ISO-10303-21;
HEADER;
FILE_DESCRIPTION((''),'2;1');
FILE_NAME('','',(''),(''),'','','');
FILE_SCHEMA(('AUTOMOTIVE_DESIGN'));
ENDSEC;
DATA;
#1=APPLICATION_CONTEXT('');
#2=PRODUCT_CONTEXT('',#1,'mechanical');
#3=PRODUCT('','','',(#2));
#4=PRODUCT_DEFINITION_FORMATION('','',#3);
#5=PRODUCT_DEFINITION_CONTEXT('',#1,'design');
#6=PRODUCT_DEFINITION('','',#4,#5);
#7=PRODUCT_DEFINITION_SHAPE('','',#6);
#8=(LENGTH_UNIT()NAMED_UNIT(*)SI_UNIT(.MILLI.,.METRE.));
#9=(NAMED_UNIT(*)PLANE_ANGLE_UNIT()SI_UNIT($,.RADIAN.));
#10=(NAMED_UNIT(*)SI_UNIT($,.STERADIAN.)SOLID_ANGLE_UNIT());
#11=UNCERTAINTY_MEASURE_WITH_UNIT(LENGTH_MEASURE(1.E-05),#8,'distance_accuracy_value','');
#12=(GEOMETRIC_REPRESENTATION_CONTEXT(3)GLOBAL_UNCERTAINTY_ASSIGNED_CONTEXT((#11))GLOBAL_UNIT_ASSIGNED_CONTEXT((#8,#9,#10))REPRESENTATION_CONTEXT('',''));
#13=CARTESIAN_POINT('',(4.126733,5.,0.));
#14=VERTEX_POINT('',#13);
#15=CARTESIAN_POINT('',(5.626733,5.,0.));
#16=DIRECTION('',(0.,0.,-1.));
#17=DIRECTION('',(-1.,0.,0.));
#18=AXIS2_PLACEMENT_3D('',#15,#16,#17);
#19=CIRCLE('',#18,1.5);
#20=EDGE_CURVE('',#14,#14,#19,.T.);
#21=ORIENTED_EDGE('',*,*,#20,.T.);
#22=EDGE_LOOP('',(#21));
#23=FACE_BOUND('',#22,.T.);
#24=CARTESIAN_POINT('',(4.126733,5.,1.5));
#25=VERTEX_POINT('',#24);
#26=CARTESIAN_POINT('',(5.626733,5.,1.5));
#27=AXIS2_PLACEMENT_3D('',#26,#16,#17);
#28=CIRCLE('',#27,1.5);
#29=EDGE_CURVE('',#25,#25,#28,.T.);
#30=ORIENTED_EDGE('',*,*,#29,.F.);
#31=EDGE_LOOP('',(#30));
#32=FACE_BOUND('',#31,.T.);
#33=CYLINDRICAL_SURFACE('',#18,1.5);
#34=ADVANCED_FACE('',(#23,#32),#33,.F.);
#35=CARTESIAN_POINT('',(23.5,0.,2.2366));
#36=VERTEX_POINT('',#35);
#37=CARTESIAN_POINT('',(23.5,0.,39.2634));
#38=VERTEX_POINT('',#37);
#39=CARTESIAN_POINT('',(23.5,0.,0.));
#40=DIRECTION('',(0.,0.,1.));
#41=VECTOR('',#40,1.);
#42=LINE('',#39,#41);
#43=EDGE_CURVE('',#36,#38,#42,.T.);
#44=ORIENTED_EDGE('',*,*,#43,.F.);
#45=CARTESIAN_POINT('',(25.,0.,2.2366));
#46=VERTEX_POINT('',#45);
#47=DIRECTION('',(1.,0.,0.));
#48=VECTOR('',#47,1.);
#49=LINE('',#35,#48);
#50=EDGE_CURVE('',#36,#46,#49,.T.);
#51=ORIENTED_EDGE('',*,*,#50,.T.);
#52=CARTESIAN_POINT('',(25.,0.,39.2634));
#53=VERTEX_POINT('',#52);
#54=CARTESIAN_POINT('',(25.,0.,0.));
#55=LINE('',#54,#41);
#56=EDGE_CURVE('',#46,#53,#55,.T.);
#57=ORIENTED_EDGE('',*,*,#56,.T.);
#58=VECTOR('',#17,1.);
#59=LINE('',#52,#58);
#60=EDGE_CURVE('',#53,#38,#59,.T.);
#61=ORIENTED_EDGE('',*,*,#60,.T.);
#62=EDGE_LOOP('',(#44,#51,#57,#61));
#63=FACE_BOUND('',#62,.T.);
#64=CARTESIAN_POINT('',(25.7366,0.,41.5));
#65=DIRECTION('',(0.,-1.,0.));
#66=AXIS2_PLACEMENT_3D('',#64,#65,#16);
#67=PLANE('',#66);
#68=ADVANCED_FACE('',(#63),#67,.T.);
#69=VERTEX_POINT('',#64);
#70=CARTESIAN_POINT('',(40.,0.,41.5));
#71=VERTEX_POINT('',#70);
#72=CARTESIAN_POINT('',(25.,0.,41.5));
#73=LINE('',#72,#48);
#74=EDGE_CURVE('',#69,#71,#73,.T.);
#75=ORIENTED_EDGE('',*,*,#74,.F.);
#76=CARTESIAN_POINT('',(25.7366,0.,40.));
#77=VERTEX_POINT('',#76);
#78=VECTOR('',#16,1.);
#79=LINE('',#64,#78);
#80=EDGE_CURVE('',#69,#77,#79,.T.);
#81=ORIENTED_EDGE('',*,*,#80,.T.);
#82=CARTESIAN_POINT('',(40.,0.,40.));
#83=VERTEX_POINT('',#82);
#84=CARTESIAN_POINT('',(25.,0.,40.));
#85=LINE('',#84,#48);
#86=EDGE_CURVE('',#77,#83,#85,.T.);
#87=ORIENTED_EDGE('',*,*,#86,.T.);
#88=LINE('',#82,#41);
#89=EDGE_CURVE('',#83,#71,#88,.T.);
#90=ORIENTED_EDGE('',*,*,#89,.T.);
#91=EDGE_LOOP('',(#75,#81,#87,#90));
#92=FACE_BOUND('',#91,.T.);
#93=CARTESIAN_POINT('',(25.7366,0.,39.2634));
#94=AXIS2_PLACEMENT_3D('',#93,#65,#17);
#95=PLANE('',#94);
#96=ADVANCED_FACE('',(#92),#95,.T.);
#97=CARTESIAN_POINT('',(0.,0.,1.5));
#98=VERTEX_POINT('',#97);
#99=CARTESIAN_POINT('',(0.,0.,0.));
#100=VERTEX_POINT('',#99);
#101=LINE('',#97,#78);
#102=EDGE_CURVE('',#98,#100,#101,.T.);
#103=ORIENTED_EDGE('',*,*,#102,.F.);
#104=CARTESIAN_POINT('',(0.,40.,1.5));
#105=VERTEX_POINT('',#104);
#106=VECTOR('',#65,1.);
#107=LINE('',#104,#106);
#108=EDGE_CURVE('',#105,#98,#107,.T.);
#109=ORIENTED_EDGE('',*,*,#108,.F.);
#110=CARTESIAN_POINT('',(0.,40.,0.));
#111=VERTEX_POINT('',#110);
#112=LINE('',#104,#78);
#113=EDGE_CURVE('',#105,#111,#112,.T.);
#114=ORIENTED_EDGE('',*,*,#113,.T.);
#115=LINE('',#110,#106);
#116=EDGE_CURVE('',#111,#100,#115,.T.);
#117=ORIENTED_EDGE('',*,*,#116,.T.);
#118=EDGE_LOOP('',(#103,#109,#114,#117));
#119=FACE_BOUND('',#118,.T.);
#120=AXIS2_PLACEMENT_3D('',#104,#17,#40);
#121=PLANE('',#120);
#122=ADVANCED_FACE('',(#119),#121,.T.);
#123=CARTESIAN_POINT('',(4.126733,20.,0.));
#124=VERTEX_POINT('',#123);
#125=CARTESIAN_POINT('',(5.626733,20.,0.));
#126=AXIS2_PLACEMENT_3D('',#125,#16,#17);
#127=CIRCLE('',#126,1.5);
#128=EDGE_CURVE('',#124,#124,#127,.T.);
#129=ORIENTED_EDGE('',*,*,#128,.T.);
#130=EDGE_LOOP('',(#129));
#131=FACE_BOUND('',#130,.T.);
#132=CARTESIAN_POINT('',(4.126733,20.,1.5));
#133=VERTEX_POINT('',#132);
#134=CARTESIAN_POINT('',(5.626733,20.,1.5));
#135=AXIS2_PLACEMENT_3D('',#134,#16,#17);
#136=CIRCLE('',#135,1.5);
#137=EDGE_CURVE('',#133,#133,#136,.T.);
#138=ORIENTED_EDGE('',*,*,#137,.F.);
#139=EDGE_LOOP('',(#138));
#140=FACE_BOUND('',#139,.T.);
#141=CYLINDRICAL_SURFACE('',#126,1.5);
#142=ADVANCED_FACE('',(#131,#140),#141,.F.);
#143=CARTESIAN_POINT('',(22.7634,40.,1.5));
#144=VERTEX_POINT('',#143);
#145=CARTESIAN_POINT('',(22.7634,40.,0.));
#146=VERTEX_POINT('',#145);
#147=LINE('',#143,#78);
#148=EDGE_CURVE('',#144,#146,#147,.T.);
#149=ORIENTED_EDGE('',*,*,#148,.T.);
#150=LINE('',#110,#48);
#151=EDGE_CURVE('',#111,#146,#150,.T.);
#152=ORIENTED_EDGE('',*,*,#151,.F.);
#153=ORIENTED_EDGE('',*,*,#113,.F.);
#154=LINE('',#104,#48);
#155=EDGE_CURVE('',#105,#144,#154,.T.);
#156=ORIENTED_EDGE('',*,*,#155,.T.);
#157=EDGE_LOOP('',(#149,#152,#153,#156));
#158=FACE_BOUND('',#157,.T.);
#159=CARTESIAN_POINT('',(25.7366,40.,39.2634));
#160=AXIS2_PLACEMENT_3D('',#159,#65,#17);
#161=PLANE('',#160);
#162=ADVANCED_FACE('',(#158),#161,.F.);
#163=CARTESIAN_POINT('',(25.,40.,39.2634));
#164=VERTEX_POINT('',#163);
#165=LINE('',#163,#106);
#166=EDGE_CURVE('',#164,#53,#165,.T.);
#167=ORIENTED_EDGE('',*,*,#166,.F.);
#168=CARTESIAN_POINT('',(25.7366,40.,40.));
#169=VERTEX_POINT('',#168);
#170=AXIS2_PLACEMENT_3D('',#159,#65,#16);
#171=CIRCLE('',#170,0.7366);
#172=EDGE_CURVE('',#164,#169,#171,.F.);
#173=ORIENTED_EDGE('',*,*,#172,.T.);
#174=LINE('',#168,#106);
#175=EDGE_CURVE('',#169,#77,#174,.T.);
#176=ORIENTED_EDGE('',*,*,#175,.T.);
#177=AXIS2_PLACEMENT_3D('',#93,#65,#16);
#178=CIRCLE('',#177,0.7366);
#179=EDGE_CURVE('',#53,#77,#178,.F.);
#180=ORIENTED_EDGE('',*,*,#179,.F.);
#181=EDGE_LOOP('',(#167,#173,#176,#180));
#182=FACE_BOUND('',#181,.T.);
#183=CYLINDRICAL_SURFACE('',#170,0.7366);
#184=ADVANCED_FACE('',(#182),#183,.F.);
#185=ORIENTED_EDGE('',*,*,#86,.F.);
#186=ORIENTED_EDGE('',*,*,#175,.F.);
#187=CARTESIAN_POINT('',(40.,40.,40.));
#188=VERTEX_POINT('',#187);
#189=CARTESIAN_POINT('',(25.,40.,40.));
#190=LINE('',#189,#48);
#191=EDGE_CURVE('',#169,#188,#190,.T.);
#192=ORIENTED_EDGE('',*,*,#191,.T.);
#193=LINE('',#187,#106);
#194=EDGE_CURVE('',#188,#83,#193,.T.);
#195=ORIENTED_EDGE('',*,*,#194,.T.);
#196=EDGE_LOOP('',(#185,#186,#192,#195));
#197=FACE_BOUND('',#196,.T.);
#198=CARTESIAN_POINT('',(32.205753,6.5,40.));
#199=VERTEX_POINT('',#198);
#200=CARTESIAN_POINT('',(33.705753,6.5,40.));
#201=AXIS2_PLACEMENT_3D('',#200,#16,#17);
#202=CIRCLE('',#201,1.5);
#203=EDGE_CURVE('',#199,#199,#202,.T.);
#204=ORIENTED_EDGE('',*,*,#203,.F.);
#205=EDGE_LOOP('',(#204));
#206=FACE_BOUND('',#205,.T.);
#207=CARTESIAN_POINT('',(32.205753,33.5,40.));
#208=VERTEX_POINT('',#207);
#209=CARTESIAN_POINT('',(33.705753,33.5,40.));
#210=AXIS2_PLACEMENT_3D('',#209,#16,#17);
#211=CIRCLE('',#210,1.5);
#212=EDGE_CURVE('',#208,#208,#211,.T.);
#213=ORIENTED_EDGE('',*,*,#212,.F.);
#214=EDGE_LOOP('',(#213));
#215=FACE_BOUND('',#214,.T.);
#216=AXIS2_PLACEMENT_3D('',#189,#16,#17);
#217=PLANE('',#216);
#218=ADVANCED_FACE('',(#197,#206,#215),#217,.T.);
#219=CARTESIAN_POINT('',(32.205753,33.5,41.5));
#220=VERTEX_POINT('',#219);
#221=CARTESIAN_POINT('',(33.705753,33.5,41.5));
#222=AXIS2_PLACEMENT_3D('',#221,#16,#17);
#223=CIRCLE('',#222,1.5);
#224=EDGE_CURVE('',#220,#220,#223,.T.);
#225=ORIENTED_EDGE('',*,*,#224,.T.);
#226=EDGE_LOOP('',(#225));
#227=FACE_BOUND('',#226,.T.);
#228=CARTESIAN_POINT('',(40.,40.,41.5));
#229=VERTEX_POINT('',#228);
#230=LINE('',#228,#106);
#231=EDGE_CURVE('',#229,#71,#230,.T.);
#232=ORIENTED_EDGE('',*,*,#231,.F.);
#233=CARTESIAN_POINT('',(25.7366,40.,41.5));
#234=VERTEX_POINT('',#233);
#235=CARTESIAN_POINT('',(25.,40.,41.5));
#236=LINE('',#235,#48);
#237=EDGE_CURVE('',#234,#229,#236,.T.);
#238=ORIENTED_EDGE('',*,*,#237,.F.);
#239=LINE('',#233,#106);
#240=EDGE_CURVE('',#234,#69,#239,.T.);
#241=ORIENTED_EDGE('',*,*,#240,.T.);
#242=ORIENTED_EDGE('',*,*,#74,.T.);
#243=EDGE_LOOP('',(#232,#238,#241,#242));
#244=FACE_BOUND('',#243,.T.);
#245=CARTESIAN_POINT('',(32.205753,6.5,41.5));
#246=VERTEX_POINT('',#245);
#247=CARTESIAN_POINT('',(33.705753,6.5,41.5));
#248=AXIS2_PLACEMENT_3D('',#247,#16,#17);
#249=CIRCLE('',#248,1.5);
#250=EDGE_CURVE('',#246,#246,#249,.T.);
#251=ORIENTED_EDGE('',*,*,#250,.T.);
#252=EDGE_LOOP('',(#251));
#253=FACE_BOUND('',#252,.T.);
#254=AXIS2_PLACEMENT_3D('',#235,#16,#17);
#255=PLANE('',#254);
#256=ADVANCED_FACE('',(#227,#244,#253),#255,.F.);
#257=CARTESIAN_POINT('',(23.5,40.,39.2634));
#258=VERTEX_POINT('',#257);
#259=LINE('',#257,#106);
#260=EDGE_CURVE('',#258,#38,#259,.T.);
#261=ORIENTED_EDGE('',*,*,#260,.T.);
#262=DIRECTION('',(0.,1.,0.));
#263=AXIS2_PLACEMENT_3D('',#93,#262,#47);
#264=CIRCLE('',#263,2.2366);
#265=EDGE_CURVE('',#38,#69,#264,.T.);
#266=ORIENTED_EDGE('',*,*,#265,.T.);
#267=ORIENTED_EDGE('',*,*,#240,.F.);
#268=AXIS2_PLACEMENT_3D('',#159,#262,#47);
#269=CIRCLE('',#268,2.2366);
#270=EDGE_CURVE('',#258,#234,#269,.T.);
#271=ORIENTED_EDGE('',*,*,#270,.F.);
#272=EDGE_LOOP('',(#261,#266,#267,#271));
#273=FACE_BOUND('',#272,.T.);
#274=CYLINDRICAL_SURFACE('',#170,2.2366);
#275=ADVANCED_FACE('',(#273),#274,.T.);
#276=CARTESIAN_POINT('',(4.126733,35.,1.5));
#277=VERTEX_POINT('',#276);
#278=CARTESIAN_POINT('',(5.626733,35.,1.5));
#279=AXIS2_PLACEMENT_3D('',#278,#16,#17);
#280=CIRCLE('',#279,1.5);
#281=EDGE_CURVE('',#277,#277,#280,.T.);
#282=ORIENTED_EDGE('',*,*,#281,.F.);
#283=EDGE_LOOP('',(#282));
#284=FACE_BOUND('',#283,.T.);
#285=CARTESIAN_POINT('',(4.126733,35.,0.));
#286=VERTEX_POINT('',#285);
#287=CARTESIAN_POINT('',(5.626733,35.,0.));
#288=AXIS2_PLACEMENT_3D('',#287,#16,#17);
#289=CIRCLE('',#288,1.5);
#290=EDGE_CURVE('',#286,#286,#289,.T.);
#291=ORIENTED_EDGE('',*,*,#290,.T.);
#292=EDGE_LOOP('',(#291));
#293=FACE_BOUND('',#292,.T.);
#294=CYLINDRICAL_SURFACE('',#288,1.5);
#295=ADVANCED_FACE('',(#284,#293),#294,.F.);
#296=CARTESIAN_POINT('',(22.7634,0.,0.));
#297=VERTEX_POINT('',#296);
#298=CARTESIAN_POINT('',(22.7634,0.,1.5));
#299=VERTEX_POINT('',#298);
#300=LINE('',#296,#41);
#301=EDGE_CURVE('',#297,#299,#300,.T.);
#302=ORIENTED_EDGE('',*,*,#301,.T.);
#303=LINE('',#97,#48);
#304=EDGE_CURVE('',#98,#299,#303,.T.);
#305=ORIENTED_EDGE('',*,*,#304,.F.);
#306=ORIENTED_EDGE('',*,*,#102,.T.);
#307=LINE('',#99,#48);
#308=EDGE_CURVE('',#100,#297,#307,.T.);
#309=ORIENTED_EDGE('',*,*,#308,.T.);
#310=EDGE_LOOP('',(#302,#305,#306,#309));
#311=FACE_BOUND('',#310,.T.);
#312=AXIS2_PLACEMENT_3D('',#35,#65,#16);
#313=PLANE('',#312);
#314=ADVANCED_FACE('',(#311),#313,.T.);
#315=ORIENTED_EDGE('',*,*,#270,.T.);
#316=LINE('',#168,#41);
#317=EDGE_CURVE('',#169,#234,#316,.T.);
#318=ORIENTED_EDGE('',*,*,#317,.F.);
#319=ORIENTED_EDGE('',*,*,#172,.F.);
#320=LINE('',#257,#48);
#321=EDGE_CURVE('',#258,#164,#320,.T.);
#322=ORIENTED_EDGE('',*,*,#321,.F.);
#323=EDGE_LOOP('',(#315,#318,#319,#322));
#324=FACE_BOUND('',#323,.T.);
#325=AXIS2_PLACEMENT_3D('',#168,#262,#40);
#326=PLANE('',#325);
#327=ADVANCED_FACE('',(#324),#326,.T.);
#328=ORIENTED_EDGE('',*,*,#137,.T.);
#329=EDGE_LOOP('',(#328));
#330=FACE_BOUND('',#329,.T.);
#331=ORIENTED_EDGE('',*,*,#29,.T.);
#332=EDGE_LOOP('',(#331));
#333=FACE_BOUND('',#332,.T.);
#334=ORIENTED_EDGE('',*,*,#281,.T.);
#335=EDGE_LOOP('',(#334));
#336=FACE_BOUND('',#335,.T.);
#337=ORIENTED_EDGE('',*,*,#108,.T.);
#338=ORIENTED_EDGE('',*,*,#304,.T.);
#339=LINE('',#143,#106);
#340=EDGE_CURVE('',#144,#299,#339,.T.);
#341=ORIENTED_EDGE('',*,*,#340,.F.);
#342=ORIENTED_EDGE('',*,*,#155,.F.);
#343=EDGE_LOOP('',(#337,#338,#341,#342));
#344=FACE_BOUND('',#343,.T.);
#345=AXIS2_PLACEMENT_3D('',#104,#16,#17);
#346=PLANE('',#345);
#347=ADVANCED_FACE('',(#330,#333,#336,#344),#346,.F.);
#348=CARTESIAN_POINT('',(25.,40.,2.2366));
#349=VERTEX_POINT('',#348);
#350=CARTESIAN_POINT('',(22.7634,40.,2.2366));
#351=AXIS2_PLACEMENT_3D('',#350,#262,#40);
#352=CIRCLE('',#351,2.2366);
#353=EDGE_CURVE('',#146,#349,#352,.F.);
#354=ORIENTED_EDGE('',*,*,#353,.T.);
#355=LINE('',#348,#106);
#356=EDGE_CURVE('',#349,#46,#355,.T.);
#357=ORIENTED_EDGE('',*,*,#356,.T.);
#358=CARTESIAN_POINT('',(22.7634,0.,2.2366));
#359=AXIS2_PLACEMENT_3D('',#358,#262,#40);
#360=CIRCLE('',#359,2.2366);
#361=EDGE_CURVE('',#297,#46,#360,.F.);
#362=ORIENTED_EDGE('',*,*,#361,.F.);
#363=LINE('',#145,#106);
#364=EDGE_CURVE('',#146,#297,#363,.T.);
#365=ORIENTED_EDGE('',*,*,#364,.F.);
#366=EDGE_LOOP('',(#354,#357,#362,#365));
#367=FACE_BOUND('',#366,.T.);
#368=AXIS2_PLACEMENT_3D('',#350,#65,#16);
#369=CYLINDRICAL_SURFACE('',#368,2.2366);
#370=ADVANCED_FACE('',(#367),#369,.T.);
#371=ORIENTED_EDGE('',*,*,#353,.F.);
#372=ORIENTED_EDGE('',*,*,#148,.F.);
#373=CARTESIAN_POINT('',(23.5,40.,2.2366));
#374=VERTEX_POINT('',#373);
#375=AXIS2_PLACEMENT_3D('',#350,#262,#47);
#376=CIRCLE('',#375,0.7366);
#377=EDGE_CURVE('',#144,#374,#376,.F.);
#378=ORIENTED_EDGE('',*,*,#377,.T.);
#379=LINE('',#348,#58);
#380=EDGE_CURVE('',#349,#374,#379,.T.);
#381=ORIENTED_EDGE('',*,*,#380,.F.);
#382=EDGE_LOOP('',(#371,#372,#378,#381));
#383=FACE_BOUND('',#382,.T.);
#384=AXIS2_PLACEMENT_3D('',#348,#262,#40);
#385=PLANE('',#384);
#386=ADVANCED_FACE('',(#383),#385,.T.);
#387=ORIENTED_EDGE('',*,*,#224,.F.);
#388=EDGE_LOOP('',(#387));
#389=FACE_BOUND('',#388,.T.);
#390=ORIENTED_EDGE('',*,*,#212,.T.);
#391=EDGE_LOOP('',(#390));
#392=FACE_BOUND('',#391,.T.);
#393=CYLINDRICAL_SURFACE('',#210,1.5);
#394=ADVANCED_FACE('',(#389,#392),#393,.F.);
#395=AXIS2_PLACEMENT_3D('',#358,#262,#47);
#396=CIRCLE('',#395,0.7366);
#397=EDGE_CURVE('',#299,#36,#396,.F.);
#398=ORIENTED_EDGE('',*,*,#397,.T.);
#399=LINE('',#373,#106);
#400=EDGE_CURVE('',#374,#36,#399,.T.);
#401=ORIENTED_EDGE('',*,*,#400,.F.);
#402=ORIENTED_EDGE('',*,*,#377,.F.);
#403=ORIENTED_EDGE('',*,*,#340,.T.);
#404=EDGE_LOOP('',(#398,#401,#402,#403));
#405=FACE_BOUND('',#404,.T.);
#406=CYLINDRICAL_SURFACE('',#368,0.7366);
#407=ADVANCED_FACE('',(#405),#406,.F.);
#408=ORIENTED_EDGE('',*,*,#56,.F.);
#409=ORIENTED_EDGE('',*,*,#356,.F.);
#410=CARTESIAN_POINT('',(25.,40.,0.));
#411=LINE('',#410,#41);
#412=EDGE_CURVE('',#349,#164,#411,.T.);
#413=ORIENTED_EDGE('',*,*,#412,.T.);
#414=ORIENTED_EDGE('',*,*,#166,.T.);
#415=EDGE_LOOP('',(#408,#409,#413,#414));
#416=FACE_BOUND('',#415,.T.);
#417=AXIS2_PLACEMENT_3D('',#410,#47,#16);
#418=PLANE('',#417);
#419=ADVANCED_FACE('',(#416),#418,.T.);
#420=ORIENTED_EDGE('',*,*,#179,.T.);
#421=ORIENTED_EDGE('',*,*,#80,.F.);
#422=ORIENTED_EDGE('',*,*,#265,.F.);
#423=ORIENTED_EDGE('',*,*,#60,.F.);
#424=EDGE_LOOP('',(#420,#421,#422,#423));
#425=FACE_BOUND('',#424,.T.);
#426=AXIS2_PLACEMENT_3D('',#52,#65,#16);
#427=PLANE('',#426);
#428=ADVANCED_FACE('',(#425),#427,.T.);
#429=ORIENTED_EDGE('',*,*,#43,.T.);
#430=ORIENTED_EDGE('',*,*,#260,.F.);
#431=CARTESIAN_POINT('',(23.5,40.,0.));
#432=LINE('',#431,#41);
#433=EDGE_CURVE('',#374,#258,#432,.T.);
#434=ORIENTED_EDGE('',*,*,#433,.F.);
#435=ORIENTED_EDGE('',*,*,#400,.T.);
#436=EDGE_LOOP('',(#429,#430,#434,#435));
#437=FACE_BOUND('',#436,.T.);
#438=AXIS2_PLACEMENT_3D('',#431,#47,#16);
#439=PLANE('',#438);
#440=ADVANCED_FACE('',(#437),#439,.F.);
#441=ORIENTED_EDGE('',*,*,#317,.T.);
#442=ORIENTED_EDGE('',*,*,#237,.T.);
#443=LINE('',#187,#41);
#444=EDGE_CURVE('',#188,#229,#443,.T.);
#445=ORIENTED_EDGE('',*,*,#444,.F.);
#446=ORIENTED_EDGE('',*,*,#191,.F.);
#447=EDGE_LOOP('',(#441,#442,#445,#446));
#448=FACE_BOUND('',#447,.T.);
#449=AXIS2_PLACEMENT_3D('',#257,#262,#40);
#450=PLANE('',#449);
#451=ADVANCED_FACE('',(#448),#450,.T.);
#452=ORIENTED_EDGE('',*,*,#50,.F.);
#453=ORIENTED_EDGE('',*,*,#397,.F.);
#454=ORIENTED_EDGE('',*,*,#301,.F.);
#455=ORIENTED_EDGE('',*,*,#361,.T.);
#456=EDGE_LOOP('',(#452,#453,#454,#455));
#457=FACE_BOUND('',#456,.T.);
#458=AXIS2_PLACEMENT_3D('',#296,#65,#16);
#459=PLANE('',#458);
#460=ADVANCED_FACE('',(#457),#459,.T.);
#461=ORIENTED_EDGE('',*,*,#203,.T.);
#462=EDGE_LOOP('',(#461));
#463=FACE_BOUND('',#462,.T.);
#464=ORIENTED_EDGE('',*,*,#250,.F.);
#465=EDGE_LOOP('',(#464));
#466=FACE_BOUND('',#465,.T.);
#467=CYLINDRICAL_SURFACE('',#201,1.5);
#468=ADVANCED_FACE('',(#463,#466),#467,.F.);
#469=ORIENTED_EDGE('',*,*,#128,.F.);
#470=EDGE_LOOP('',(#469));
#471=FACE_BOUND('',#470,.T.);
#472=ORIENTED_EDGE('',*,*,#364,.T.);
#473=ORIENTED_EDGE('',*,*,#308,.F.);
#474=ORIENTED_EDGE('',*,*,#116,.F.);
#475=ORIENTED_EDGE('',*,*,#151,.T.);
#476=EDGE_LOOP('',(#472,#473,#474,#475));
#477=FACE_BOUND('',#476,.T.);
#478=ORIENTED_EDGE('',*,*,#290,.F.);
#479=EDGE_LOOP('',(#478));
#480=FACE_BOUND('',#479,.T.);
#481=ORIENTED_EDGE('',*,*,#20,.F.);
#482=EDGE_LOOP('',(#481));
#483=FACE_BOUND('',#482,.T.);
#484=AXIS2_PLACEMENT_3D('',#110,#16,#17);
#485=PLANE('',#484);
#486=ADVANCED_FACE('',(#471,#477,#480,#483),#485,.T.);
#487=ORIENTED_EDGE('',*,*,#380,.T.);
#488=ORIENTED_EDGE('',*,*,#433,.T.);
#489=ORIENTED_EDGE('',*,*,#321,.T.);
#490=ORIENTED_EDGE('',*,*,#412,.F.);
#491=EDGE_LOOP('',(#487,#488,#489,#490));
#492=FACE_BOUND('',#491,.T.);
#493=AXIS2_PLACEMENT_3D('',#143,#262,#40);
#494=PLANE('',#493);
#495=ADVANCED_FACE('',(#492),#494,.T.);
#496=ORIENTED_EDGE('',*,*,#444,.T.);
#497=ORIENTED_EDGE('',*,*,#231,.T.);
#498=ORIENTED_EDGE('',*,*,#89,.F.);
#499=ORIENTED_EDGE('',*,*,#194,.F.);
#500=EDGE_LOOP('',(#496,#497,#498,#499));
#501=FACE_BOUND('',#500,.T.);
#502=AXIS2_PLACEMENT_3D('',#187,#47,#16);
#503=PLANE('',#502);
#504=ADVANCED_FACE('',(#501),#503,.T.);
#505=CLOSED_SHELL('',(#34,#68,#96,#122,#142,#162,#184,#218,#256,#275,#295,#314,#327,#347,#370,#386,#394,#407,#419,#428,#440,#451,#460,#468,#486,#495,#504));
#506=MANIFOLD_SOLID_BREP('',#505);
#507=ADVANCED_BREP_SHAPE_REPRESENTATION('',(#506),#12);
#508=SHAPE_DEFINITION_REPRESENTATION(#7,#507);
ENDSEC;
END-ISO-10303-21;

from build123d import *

# Parameters (mm, degrees)
BASE_FLANGE1_DEPTH          = 40
F_3_0MM_PRESS_DOWEL_HOLE1_D = 3
F_3_0MM_PRESS_DOWEL_HOLE2_D = 3


# Sheet-metal steps are written as plain solids
with BuildPart() as part:
    # Sketch1 → Base-Flange1 (new body)
    with BuildSketch(Plane(origin=(0, 0, 0), x_dir=(1, 0, 0), z_dir=(0, 1, 0))):
        with BuildLine():
            Line((0, 0), (22.7634, 0))
            ThreePointArc((22.7634, 0), (24.344915027, -0.655084973), (25, -2.2366))
            Line((25, -2.2366), (25, -39.2634))
            ThreePointArc((25, -39.2634), (25.215745145, -39.784254855), (25.7366, -40))
            Line((25.7366, -40), (40, -40))
            Line((40, -40), (40, -41.5))
            Line((40, -41.5), (25.7366, -41.5))
            ThreePointArc((25.7366, -41.5), (24.155084973, -40.844915027), (23.5, -39.2634))
            Line((23.5, -39.2634), (23.5, -2.2366))
            ThreePointArc((23.5, -2.2366), (23.284254855, -1.715745145), (22.7634, -1.5))
            Line((22.7634, -1.5), (0, -1.5))
            Line((0, -1.5), (0, 0))
        make_face()
    extrude(amount=BASE_FLANGE1_DEPTH)

    # Ø3.0mm Press Dowel Hole1 (through all)
    with Locations(Plane(origin=(0, 0, 40), x_dir=(-1, 0, 0), z_dir=(0, 0, -1))):
        with Locations((-33.705752928, 33.5), (-33.705752928, 6.5)):
            Hole(F_3_0MM_PRESS_DOWEL_HOLE1_D / 2)

    # Ø3.0mm Press Dowel Hole2 (through all)
    with Locations(Plane(origin=(0, 0, 0), x_dir=(-1, 0, 0), z_dir=(0, 0, -1))):
        with Locations((-5.626733286, 35), (-5.626733286, 5), (-5.626733286, 20)):
            Hole(F_3_0MM_PRESS_DOWEL_HOLE2_D / 2)


solid = part.part
